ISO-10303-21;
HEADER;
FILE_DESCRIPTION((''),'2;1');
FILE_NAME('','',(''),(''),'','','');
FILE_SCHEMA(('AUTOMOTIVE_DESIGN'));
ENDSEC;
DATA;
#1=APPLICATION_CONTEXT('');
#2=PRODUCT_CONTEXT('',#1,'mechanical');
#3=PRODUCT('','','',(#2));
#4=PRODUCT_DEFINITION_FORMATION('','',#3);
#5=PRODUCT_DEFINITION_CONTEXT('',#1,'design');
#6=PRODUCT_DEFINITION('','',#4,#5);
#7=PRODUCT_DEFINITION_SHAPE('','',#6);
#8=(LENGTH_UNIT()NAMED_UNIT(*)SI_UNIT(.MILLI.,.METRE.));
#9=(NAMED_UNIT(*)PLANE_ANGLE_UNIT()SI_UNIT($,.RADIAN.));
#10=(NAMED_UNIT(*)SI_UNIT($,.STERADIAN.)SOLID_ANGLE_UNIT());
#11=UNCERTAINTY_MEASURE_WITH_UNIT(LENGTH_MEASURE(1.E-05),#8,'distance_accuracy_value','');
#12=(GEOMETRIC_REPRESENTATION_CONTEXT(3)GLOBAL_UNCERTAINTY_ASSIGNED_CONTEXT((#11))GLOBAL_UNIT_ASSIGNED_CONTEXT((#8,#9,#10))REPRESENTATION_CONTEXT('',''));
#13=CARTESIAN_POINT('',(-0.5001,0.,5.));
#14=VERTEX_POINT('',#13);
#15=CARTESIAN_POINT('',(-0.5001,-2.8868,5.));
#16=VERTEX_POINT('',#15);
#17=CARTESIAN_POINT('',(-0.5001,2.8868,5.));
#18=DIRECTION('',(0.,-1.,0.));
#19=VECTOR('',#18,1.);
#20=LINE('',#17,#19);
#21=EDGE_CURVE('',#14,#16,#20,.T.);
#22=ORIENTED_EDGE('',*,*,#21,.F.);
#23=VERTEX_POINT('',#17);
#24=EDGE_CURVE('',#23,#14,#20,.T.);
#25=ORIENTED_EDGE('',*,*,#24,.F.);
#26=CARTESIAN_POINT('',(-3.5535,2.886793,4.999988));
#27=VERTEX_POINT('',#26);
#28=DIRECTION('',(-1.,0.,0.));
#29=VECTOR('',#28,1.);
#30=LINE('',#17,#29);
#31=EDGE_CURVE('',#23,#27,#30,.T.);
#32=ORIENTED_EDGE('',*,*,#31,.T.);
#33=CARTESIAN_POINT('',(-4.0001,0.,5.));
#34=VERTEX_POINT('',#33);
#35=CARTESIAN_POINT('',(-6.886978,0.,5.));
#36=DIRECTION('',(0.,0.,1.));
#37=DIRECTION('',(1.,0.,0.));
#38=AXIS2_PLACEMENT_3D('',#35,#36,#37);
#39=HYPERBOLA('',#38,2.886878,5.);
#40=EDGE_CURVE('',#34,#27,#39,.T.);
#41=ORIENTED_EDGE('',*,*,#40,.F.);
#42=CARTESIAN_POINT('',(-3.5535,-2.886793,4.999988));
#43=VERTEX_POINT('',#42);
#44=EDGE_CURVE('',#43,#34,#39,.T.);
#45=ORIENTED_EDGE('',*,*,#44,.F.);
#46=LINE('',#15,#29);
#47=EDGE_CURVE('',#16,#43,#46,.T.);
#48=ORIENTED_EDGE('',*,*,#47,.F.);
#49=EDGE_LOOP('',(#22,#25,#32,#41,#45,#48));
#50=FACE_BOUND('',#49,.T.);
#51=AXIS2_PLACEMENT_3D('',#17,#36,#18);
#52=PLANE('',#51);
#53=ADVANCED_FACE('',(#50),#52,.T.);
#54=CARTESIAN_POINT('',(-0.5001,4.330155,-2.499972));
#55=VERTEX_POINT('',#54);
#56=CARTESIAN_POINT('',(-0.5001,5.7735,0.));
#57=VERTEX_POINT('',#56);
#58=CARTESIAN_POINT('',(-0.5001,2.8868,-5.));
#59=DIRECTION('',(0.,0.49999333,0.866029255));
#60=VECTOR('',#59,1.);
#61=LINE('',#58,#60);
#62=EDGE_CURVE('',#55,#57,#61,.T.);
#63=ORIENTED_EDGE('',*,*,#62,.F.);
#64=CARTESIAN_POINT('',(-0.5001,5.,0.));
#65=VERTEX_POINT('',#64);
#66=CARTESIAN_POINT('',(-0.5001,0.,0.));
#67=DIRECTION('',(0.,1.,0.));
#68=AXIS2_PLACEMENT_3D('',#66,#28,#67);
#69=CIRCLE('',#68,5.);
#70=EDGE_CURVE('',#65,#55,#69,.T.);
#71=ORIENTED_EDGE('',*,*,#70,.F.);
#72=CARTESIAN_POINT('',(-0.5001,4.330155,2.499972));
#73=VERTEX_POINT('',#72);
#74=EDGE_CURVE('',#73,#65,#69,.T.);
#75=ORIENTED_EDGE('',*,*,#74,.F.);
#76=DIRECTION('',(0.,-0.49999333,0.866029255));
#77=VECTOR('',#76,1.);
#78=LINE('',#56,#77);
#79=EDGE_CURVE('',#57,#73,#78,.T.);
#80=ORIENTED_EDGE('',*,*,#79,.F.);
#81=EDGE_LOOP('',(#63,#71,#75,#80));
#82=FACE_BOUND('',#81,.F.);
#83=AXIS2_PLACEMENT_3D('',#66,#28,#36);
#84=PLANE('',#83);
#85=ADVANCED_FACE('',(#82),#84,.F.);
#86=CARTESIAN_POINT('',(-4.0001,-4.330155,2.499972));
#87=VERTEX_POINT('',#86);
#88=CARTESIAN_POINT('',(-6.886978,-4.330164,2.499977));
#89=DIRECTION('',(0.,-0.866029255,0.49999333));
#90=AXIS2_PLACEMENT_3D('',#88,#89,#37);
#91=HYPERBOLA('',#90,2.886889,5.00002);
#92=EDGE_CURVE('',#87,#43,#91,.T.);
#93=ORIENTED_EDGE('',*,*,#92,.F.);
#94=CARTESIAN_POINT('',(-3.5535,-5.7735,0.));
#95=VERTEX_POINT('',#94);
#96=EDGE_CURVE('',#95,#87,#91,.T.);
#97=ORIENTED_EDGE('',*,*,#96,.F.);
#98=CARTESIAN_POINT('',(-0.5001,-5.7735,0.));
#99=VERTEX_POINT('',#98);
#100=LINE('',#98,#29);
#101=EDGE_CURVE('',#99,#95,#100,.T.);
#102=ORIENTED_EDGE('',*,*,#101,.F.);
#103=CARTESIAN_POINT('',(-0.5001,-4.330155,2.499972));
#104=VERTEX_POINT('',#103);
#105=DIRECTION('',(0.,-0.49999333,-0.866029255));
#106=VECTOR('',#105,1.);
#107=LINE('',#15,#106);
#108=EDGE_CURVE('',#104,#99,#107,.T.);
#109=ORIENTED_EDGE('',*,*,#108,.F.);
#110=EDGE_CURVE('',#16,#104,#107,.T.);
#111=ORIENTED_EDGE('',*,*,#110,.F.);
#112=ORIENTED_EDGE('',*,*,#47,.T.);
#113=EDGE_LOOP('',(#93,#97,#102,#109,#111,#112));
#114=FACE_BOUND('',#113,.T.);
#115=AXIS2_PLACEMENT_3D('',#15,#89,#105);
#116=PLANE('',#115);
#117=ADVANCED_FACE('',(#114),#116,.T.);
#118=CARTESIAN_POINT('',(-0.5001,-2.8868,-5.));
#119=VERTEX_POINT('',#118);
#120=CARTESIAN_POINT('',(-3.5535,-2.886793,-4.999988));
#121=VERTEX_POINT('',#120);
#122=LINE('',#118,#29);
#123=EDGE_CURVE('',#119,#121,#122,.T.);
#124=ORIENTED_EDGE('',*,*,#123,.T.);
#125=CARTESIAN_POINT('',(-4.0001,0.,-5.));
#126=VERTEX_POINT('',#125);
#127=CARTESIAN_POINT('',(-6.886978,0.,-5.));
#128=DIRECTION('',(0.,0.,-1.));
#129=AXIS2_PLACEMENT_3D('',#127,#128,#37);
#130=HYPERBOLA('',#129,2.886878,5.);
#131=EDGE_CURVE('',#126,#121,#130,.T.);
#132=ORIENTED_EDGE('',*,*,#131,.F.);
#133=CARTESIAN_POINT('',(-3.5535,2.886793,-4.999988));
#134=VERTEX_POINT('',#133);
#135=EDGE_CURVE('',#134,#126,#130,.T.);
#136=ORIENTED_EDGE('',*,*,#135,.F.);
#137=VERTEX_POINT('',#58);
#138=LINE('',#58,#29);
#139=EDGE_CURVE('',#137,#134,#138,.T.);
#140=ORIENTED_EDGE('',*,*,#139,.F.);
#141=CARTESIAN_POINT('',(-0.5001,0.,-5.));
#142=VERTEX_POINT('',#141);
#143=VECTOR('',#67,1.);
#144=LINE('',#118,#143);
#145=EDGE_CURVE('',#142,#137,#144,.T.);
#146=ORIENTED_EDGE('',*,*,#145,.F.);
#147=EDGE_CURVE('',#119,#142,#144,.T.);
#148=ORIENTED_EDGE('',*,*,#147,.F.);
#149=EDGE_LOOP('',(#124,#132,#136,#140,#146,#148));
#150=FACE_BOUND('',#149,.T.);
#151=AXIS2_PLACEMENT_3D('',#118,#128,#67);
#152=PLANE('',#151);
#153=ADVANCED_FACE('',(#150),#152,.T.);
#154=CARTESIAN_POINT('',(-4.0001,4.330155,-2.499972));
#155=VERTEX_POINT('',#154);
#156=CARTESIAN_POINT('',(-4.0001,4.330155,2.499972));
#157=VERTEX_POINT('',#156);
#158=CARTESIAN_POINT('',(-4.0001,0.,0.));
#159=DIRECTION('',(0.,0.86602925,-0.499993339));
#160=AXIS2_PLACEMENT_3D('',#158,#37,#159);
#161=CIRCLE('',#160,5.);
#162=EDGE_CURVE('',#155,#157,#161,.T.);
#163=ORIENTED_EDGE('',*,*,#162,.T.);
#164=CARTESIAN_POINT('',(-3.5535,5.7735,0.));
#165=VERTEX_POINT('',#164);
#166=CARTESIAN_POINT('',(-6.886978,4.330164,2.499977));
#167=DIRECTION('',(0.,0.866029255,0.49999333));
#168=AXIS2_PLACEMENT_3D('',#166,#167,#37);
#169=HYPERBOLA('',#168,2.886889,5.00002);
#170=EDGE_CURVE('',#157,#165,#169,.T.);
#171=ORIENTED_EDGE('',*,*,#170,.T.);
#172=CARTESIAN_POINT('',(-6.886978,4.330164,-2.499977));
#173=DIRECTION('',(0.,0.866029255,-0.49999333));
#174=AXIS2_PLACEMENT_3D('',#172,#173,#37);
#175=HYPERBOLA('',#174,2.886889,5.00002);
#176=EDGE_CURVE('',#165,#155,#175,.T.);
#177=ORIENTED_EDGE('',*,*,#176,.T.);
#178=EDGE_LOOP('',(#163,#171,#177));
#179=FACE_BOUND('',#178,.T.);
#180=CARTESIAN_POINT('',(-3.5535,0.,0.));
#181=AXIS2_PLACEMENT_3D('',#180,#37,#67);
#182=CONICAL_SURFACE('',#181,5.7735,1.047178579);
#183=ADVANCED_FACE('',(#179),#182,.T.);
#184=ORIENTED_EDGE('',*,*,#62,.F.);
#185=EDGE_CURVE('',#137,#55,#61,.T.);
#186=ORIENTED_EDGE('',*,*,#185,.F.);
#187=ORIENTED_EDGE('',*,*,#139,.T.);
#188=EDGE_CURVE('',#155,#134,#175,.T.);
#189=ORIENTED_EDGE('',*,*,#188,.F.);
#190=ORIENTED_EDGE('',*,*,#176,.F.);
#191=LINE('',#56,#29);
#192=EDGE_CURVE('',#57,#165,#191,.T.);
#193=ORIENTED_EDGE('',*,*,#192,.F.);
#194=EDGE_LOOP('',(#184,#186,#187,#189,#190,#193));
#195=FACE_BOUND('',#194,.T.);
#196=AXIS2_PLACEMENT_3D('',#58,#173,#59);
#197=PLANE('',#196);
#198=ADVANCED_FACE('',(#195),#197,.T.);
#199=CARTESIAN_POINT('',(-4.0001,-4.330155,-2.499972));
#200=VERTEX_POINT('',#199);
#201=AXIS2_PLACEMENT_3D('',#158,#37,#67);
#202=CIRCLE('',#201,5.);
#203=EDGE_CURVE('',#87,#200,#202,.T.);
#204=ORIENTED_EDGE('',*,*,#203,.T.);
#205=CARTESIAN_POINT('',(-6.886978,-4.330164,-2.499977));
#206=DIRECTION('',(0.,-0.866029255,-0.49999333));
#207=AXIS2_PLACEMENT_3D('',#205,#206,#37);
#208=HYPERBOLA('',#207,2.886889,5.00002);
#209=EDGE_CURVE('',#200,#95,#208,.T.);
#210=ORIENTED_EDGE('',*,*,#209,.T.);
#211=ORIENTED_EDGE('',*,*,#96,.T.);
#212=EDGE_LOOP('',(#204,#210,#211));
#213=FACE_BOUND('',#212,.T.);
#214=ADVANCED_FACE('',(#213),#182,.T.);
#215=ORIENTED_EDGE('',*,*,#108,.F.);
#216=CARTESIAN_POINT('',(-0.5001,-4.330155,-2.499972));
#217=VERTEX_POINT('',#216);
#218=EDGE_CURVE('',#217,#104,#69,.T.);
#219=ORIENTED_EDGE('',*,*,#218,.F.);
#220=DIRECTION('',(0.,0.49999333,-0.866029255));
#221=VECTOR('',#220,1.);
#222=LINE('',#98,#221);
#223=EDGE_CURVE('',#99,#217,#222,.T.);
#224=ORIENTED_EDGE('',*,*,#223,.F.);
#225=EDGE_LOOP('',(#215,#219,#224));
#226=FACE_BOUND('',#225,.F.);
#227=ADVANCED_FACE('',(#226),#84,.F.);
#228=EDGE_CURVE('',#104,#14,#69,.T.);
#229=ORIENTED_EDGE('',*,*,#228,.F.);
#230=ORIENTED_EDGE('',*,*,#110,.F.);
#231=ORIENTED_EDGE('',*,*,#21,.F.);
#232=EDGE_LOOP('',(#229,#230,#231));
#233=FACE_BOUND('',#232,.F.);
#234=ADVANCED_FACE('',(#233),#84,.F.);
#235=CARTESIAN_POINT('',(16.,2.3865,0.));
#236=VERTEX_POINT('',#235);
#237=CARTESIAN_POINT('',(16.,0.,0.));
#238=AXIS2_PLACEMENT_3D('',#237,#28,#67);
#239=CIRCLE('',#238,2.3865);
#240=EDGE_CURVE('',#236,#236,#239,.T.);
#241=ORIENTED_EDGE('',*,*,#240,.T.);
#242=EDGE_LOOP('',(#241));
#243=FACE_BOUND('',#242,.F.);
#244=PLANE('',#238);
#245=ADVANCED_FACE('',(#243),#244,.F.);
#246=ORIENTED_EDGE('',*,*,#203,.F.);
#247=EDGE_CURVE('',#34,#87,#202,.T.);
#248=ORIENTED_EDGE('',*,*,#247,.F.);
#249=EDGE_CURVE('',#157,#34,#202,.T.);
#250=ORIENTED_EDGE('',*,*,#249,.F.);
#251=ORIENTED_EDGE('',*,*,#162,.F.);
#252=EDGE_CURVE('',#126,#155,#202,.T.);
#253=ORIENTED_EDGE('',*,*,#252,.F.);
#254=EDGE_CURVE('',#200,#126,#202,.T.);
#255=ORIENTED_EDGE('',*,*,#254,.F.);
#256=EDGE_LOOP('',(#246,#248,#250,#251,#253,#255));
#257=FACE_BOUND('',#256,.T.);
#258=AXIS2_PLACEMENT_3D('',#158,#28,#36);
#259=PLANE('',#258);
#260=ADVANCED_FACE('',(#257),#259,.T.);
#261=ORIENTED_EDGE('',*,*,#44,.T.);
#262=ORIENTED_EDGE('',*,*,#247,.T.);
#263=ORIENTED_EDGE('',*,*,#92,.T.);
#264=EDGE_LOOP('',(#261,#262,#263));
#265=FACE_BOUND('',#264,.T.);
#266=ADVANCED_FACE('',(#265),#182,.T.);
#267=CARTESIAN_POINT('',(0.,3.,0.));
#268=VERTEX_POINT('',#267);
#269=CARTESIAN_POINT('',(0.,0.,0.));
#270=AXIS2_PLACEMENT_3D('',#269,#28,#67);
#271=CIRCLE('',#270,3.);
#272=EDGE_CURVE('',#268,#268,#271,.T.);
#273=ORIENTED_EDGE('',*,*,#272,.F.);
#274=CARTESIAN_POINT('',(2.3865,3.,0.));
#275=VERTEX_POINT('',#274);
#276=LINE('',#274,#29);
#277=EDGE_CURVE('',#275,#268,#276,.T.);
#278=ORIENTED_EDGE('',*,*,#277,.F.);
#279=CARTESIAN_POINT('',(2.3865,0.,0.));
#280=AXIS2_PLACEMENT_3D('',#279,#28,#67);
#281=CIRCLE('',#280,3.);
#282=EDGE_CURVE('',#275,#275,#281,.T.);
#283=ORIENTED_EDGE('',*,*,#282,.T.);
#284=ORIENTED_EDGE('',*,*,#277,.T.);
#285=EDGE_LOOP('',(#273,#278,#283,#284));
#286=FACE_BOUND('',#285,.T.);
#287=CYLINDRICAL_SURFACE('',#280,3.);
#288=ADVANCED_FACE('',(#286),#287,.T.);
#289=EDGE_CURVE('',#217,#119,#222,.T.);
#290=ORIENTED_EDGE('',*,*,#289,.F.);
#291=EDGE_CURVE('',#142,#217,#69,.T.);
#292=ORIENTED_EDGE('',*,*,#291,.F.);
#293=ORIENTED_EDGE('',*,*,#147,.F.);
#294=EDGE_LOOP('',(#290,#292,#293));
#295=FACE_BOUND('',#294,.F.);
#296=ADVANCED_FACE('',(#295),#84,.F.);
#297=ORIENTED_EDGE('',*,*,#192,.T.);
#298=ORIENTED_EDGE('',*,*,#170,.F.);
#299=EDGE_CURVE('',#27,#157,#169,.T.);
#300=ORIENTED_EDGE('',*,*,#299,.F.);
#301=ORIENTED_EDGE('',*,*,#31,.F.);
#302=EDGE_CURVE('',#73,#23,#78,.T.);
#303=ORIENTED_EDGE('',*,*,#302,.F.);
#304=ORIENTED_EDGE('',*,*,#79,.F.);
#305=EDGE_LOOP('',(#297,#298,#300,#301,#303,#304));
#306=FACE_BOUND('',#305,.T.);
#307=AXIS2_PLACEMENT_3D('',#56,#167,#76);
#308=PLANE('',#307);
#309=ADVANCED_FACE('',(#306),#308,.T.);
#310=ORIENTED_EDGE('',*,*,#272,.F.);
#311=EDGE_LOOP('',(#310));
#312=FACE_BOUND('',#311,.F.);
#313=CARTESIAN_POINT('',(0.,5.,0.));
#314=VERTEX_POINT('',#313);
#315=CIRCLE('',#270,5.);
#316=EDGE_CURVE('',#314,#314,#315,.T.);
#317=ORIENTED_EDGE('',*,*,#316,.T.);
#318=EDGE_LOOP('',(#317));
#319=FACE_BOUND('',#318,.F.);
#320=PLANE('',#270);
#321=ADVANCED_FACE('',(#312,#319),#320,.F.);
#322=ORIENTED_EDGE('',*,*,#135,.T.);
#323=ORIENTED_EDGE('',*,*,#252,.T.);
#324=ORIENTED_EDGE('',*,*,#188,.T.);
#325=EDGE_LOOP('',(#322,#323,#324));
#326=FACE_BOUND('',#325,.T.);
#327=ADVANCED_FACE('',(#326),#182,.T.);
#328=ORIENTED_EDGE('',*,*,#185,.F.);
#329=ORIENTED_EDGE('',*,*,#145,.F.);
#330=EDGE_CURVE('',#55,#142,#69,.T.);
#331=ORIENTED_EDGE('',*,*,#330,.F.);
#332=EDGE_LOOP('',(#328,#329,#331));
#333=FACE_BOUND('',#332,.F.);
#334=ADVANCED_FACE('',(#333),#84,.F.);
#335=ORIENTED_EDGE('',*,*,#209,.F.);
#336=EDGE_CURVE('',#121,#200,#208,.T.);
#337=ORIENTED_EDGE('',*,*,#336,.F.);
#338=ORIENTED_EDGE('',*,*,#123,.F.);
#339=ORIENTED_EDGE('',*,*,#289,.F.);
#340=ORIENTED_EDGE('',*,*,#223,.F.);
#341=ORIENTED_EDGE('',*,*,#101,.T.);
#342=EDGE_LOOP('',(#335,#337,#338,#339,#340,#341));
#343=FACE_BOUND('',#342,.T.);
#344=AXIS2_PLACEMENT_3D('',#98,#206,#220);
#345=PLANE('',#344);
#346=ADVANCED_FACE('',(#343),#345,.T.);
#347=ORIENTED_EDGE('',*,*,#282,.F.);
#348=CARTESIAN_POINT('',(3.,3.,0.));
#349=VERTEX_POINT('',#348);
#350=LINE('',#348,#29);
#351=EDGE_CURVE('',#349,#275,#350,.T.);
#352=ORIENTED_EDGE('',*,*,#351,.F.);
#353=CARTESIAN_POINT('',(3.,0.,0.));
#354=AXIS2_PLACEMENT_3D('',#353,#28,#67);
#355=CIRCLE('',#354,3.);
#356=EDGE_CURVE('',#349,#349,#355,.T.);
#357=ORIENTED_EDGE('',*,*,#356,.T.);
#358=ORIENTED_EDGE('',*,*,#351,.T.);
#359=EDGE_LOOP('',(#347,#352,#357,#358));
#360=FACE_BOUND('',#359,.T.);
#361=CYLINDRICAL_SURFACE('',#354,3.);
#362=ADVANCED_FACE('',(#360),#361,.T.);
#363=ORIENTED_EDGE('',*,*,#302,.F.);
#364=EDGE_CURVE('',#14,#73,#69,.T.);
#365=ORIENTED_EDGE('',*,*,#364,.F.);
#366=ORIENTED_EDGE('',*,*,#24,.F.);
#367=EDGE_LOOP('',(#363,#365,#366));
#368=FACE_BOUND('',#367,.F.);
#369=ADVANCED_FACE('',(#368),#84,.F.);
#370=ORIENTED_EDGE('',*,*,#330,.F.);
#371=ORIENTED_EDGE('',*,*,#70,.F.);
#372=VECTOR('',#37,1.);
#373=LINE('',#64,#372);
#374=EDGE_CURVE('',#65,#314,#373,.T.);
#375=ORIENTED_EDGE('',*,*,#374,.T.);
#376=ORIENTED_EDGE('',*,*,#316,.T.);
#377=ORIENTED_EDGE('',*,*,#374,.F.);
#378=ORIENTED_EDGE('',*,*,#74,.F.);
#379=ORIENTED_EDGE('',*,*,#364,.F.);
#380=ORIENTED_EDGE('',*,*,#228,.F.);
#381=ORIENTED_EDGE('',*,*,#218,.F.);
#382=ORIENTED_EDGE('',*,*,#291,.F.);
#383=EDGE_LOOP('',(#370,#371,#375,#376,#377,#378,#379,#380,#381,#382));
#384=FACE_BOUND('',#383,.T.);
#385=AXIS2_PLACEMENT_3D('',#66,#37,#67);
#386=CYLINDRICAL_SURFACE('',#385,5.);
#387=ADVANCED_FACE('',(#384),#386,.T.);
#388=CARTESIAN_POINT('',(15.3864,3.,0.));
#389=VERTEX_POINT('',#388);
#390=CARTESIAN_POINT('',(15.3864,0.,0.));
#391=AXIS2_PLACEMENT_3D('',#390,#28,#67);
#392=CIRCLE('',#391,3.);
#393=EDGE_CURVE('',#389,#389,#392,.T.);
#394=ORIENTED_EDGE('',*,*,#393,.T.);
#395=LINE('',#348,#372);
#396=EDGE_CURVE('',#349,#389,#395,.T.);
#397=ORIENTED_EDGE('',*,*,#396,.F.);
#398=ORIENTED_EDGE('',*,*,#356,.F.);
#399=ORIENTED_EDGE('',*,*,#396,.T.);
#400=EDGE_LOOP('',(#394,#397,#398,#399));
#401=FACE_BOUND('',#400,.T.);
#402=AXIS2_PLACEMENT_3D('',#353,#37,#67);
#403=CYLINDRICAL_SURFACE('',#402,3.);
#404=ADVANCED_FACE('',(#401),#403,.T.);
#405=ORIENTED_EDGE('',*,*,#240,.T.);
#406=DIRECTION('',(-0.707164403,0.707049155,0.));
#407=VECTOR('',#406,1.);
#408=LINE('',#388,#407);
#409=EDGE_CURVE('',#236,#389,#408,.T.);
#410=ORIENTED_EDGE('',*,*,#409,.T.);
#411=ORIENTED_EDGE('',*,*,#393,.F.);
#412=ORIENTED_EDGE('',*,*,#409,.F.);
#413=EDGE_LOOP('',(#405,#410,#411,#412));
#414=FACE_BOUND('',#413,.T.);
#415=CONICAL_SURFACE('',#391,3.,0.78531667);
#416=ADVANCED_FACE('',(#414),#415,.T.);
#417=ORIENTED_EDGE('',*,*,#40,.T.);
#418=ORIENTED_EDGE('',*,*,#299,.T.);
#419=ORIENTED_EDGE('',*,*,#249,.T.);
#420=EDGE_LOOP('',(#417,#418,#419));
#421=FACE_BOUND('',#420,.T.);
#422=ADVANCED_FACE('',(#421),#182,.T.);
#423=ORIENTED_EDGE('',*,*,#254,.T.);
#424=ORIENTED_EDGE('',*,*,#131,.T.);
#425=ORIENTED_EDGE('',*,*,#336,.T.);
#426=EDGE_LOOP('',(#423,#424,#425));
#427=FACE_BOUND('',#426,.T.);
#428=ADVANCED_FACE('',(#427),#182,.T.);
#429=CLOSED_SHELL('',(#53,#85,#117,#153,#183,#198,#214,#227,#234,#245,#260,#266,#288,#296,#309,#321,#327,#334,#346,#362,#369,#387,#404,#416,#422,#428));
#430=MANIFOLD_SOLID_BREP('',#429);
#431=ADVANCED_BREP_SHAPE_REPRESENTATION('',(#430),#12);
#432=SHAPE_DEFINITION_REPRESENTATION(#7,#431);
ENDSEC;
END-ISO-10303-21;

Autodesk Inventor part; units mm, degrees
ref_plane "YZ Plane" through (0, 0, 0) normal (1, 0, 0) x (0, 1, 0)
ref_plane "XZ Plane" through (0, 0, 0) normal (0, 1, 0) x (-1, 0, 0)
sketch "Sketch1" plane through (0, 0, 0) normal (0, 0, 1) x (1, 0, 0)
  line L0 (0, 5) -> (0, 3)
  line L1 (3, 3) -> (16, 3)
  line L2 (16, 3) -> (16, 0)
  line L3 (16, 0) -> (-0.5001, 0)
  line L4 (-3.8001, 0) -> (19.3, 0) projected
  line L5 (-0.5001, 0) -> (-0.5001, 5)
  line L6 (-0.5001, 5) -> (0, 5)
  line L7 (3, 3) -> (2.3865, 3)
  line L8 (2.3865, 3) -> (0, 3)
  line L9 (0, -1) -> (0, 6) projected
  dimension "d0" = 16
  dimension "d1" = 13
  dimension "d2" = 6
  dimension "d9" = 0.5001
  dimension "d10" = 10
  dimension "d13" = 0.6136
  dimension "d14" = 6
revolve "Body" add sketch "Sketch1" angle 360 about axis through (16, 0, 0) along (-1, 0, 0)
sketch "Sketch2" plane through (-0.5001, 0, 0) normal (-1, 0, 0) x (0, 0, 1)
  line L0 (0, 5.7735) -> (5, 2.8868)
  line L1 (5, 2.8868) -> (5, -2.8868)
  line L2 (5, -2.8868) -> (0, -5.7735)
  line L3 (0, -5.7735) -> (-5, -2.8868)
  line L4 (-5, -2.8868) -> (-5, 2.8868)
  line L5 (-5, 2.8868) -> (0, 5.7735)
  point P0 (0, 0)
  point P1 (0, 0)
  dimension "d11" = 10
extrude "Head" add sketch "Sketch2" along normal blind 3.5
sketch "Sketch4" plane through (0, 0, 0) normal (0, 0, 1) x (1, 0, 0)
  line L0 (-4.0001, 5) -> (-4.0001, 5.7735)
  line L1 (-4.0001, 5.7735) -> (-3.5535, 5.7735)
  line L2 (-3.5535, 5.7735) -> (-4.0001, 5)
  line L3 (-4.7001, 0) -> (0.1999, 0) projected
  line L4 (-0.5001, 5.7735) -> (-4.0001, 5.7735) projected
  line L5 (-4.0001, 2.8868) -> (-4.0001, 5.7735) projected
  dimension "d5" = 30
  dimension "d19" = 10
revolve "Chamfer1" cut sketch "Sketch4" angle 360 about axis through (-10, 0, 0) along (1, 0, 0)
thread "Thread" size "M6x1" class "6g" standard "ISO Metric profile" length 13
chamfer "Chamfer2" distance 0.6135 distance2 0.6136 1 edges at (16, -3, 0) measured on face at (16, -0.301, 1.1526)
ref_plane "Work Plane1" through (1.525, 0, 0) normal (0, 0, 1) x (1, 0, 0)
equation "\"d0\" = NLG"
equation "\"d1\" = GEL"
equation "\"d2\" = GD"
equation "\"d10\" = SD2"
equation "\"d14\" = BDM"
equation "\"d11\" = SW"
equation "\"d3\" = KOH - SD"
equation "\"d5\" = ANG1"
equation "\"d19\" = SW0"
equation "\"d15\" = GEL"
equation "\"d6\" = -0.5 * SPD + 0.5 * GD"
equation "\"NLG\" = 16"
equation "\"GD\" = NND"
equation "\"BDM\" = NND"
equation "\"KOH\" = 4"
equation "\"GEL\" = 13"
equation "\"SW\" = 10"
equation "\"SW0\" = SW"
equation "\"SPD\" = NND - 1.2269 * PTC"
equation "\"SD2\" = SW"
equation "\"SD\" = 0.5"
equation "\"ANG1\" = 30deg"
equation "\"GAL\" = 0.61345 * PTC"
equation "\"GUL\" = 0.61345 * PTC"
equation "\"RR\" = 0.25"
equation "\"WFT\" = SD"
equation "\"GD1\" = THREADDIA - 1.2269 * PTC"
equation "\"THREADDIA\" = 6"
equation "\"TOA\" = 30deg"
equation "\"FAWI\" = 45deg"
equation "\"PTC\" = 1"
equation "\"NND\" = 6"
equation "\"E0\" = 1.155 * SW"
properties part number "AS 1110 - M6 x 16" material "Steel, Mild"
